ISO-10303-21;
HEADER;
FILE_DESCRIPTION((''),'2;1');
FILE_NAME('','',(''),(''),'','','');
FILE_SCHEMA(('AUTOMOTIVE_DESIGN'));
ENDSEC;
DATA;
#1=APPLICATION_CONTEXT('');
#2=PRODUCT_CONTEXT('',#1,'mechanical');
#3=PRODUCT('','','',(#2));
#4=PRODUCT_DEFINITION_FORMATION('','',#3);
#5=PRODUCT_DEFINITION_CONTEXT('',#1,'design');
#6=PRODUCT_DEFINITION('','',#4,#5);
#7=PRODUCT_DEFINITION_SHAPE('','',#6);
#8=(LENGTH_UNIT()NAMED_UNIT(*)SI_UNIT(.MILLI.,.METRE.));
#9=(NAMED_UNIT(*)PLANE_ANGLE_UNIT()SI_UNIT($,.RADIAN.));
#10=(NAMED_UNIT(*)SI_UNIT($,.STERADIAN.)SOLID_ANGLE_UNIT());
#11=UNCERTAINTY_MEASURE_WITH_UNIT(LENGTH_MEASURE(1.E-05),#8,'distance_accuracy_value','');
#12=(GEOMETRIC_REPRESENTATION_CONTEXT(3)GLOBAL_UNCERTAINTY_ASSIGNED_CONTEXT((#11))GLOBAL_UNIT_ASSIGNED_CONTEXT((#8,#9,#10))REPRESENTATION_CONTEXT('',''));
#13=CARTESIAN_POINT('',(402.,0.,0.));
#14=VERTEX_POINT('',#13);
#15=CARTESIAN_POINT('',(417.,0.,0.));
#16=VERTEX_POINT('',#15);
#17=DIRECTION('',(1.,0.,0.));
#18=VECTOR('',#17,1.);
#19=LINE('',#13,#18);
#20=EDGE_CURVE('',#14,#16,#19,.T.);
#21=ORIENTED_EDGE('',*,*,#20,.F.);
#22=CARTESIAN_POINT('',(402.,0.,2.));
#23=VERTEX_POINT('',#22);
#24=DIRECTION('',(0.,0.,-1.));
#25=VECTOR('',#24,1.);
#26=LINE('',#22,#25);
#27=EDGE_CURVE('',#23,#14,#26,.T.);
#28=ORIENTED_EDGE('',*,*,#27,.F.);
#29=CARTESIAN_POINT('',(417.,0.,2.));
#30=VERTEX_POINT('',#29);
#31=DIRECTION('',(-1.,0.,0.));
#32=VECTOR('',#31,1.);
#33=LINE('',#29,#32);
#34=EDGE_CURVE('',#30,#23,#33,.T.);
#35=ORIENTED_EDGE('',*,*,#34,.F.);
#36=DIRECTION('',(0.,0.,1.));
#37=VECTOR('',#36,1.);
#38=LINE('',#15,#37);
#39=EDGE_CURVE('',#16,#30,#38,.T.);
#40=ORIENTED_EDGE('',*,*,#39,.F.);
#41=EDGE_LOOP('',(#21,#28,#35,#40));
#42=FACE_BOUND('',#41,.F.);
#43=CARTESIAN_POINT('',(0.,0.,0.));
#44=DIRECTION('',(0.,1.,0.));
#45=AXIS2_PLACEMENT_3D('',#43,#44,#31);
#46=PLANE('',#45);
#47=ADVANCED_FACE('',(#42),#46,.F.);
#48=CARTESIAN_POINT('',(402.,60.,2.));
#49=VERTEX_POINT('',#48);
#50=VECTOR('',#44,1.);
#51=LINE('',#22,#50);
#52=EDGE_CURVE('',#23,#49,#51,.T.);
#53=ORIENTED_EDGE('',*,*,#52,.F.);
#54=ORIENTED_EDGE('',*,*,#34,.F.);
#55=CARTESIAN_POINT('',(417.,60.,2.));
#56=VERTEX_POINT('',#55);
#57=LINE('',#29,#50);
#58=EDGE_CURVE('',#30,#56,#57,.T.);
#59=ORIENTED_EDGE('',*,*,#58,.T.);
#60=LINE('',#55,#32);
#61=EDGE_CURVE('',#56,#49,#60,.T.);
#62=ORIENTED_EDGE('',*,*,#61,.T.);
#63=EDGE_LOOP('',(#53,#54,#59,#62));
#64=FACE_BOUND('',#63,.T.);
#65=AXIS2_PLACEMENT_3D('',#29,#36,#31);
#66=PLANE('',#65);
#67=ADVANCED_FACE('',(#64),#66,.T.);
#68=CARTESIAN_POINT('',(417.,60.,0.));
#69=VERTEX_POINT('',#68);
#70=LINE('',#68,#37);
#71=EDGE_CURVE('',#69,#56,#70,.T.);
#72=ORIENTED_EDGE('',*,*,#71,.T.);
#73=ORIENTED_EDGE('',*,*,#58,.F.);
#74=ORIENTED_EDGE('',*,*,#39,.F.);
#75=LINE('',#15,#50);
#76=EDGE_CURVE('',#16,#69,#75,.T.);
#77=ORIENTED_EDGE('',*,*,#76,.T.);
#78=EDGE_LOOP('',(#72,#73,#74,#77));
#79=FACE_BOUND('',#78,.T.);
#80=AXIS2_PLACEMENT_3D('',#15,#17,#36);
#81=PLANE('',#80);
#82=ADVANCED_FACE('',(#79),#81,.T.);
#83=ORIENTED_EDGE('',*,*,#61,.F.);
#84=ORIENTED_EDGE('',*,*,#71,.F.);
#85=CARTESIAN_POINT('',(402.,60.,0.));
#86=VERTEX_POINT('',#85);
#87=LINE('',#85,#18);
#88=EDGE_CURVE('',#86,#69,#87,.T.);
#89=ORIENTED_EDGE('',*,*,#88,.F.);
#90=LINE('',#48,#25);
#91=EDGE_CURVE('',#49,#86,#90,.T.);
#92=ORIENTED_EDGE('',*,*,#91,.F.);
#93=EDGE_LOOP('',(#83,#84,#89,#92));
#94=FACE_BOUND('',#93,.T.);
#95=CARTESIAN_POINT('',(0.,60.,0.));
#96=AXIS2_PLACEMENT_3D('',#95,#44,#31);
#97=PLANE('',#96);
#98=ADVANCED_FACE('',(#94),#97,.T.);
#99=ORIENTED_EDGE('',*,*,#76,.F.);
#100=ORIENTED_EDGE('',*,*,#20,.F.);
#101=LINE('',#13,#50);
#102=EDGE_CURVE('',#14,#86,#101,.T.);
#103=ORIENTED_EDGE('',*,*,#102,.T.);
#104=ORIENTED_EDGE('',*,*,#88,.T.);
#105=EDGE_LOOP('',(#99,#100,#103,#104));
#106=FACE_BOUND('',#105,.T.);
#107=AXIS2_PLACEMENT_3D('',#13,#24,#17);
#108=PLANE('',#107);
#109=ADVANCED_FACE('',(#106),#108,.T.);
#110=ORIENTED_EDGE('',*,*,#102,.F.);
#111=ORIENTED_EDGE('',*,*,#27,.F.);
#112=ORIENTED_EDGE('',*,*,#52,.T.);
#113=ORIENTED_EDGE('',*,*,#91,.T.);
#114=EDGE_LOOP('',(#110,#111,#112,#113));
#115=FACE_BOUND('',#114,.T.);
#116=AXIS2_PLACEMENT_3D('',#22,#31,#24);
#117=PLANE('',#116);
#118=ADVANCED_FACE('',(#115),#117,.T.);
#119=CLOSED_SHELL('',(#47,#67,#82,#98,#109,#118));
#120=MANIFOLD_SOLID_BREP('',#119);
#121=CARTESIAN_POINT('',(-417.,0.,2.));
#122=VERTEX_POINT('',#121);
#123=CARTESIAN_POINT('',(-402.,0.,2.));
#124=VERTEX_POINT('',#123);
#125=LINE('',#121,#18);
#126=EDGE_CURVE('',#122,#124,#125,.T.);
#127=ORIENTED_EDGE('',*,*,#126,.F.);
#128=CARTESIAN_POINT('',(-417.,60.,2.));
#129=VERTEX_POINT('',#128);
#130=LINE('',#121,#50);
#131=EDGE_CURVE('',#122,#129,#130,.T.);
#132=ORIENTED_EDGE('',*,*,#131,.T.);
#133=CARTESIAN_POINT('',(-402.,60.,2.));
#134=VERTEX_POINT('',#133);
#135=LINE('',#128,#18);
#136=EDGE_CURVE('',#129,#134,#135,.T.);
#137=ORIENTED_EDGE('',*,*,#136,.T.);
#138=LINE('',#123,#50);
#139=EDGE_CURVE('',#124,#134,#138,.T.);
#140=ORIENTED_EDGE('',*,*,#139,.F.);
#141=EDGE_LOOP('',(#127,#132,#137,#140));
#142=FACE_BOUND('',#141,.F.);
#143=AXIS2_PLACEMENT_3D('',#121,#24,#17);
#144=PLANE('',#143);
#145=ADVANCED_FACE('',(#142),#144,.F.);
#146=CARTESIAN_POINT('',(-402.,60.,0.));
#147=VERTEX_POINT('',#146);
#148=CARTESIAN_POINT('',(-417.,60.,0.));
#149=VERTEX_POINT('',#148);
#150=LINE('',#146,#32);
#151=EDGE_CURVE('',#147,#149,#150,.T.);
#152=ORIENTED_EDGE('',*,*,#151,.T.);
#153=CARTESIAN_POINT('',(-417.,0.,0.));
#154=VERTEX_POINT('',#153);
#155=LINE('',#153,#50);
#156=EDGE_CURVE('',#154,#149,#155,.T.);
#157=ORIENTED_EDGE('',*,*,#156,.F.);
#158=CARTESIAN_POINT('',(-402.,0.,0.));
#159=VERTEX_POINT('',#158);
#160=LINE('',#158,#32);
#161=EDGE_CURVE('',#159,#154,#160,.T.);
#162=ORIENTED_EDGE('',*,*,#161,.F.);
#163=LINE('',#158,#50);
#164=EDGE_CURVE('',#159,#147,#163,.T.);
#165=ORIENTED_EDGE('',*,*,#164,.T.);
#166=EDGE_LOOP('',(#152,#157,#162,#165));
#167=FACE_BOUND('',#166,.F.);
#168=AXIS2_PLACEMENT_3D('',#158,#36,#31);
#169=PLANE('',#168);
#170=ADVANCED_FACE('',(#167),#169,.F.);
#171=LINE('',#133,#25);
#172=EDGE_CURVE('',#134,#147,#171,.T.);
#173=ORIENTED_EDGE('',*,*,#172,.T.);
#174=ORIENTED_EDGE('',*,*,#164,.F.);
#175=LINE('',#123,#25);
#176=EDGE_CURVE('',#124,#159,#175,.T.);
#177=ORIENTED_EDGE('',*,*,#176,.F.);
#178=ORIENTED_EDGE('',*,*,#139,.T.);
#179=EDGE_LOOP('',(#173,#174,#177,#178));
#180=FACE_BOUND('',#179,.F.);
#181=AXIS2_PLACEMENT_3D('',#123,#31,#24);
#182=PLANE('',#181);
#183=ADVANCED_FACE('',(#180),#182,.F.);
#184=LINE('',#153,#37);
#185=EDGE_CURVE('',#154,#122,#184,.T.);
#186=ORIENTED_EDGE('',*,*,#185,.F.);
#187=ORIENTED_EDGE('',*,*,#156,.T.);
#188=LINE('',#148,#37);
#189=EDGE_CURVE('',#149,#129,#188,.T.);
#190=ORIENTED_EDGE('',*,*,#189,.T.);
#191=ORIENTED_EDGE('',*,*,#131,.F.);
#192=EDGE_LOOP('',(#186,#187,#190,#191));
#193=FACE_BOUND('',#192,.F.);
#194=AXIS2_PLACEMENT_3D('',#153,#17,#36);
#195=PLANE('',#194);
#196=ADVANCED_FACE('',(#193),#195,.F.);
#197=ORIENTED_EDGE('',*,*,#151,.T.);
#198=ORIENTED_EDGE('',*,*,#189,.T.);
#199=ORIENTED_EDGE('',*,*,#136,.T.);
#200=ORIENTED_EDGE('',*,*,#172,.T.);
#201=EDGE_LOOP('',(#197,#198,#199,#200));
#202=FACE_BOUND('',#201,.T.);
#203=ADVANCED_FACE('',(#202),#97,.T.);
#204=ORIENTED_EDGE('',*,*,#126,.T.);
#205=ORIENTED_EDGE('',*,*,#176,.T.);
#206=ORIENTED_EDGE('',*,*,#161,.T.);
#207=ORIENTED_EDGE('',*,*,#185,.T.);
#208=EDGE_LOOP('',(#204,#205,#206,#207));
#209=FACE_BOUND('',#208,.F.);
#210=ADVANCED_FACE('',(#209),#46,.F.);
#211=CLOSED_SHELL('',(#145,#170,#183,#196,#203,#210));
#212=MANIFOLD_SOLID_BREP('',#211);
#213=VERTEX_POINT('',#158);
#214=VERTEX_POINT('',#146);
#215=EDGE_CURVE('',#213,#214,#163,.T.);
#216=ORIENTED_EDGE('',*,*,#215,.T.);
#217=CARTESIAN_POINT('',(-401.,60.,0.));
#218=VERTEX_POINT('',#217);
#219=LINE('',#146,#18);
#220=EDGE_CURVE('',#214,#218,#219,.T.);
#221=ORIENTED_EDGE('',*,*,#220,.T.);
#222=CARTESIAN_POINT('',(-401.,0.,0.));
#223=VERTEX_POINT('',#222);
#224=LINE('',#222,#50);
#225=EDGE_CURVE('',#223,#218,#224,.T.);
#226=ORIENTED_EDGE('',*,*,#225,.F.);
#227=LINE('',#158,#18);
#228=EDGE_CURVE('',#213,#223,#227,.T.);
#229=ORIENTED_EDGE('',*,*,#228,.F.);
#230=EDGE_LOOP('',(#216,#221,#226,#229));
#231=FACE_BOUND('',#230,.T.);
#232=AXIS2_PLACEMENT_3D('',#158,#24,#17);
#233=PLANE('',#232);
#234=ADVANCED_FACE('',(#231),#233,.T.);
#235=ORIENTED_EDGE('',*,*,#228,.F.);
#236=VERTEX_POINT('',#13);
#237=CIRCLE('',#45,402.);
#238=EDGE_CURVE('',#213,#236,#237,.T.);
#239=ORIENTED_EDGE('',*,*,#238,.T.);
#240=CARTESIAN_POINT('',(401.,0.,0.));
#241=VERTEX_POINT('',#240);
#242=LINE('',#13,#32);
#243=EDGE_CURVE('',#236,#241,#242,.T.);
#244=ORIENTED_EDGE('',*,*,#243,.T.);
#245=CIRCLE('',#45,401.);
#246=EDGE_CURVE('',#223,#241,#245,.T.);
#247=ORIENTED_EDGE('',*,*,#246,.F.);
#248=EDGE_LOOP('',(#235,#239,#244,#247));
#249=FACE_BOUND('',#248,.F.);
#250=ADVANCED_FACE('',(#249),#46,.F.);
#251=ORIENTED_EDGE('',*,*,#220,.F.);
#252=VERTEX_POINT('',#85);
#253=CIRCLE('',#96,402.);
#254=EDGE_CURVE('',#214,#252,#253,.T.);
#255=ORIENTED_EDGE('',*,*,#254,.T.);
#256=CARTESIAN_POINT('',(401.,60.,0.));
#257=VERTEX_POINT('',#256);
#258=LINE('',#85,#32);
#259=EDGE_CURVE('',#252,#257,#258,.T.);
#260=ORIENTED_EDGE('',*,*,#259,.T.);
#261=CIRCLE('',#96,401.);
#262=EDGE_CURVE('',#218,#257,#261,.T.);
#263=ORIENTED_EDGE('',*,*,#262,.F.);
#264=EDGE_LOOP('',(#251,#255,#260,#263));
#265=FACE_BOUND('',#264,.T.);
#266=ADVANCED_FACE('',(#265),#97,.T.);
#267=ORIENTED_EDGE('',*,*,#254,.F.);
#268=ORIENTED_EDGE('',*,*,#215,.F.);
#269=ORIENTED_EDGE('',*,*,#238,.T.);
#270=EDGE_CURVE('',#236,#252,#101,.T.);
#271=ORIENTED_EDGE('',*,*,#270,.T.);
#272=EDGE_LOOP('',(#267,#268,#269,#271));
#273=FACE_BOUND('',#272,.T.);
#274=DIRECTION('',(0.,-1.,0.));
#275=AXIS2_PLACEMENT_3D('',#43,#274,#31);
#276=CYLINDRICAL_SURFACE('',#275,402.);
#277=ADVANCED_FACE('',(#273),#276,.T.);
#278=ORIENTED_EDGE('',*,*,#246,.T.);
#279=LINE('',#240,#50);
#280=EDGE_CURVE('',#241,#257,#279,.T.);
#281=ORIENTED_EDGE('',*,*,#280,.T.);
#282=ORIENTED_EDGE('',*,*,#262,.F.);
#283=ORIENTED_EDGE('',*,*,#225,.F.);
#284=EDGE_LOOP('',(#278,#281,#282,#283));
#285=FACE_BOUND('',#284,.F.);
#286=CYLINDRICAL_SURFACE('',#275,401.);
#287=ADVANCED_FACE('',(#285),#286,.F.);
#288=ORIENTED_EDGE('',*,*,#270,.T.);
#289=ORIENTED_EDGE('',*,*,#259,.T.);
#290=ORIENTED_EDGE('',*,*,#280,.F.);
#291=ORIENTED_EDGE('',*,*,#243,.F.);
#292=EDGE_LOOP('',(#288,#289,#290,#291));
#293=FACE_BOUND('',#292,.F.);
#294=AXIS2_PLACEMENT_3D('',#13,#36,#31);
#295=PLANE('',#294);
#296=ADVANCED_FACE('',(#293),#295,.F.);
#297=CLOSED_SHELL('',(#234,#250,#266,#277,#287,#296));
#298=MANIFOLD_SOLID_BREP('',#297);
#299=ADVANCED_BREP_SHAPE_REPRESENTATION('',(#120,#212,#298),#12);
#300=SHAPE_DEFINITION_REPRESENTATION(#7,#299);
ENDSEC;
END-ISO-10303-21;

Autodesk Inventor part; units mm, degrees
ref_plane "YZ Plane" through (0, 0, 0) normal (1, 0, 0) x (0, 1, 0)
ref_plane "XY Plane" through (0, 0, 0) normal (0, 0, 1) x (1, 0, 0)
sketch "Sketch1" plane through (0, 0, 0) normal (0, 1, 0) x (-1, 0, 0)
  arc A0 (401, 0) -> (-401, 0) centre (0, 0) ccw
  line L0 (0, 0) -> (-401, 0) construction
  line L1 (0, 0) -> (401, 0) construction
  arc A1 (402, 0) -> (-402, 0) centre (0, 0) ccw
  line L2 (0, 0) -> (-402, 0) construction
  line L3 (0, 0) -> (402, 0) construction
  line L4 (402, 0) -> (401, 0)
  line L5 (-402, 0) -> (-401, 0)
  dimension "d0" = 401
  dimension "d1" = 180
  dimension "d2" = 402
  dimension "d3" = 180
extrude "Extrusion1" add sketch "Sketch1" along normal blind 60
sketch "Sketch2" plane through (0, 0, 0) normal (0, 1, 0) x (-1, 0, 0)
  line L0 (-402, 0) -> (-417, 0)
  line L1 (-417, 0) -> (-417, 2)
  line L2 (-417, 2) -> (-402, 2)
  line L3 (-402, 2) -> (-402, 0)
  point P0 (0, 0)
  dimension "d6" = 15
  dimension "d7" = 2
extrude "Extrusion2" add sketch "Sketch2" along normal blind 60
sketch "Sketch3" plane through (0, 0, 0) normal (0, 1, 0) x (-1, 0, 0)
  line L0 (402, 0) -> (417, 0)
  line L1 (417, 0) -> (417, 2)
  line L2 (417, 2) -> (402, 2)
  line L3 (402, 2) -> (402, 0)
  point P0 (0, 0)
  dimension "d10" = 15
  dimension "d11" = 2
extrude "Extrusion3" add sketch "Sketch3" along normal blind 60
ref_plane "Work Plane1" through (0, 30, 0) normal (0, 1, 0) x (-1, 0, 0)
properties part number "Band"
